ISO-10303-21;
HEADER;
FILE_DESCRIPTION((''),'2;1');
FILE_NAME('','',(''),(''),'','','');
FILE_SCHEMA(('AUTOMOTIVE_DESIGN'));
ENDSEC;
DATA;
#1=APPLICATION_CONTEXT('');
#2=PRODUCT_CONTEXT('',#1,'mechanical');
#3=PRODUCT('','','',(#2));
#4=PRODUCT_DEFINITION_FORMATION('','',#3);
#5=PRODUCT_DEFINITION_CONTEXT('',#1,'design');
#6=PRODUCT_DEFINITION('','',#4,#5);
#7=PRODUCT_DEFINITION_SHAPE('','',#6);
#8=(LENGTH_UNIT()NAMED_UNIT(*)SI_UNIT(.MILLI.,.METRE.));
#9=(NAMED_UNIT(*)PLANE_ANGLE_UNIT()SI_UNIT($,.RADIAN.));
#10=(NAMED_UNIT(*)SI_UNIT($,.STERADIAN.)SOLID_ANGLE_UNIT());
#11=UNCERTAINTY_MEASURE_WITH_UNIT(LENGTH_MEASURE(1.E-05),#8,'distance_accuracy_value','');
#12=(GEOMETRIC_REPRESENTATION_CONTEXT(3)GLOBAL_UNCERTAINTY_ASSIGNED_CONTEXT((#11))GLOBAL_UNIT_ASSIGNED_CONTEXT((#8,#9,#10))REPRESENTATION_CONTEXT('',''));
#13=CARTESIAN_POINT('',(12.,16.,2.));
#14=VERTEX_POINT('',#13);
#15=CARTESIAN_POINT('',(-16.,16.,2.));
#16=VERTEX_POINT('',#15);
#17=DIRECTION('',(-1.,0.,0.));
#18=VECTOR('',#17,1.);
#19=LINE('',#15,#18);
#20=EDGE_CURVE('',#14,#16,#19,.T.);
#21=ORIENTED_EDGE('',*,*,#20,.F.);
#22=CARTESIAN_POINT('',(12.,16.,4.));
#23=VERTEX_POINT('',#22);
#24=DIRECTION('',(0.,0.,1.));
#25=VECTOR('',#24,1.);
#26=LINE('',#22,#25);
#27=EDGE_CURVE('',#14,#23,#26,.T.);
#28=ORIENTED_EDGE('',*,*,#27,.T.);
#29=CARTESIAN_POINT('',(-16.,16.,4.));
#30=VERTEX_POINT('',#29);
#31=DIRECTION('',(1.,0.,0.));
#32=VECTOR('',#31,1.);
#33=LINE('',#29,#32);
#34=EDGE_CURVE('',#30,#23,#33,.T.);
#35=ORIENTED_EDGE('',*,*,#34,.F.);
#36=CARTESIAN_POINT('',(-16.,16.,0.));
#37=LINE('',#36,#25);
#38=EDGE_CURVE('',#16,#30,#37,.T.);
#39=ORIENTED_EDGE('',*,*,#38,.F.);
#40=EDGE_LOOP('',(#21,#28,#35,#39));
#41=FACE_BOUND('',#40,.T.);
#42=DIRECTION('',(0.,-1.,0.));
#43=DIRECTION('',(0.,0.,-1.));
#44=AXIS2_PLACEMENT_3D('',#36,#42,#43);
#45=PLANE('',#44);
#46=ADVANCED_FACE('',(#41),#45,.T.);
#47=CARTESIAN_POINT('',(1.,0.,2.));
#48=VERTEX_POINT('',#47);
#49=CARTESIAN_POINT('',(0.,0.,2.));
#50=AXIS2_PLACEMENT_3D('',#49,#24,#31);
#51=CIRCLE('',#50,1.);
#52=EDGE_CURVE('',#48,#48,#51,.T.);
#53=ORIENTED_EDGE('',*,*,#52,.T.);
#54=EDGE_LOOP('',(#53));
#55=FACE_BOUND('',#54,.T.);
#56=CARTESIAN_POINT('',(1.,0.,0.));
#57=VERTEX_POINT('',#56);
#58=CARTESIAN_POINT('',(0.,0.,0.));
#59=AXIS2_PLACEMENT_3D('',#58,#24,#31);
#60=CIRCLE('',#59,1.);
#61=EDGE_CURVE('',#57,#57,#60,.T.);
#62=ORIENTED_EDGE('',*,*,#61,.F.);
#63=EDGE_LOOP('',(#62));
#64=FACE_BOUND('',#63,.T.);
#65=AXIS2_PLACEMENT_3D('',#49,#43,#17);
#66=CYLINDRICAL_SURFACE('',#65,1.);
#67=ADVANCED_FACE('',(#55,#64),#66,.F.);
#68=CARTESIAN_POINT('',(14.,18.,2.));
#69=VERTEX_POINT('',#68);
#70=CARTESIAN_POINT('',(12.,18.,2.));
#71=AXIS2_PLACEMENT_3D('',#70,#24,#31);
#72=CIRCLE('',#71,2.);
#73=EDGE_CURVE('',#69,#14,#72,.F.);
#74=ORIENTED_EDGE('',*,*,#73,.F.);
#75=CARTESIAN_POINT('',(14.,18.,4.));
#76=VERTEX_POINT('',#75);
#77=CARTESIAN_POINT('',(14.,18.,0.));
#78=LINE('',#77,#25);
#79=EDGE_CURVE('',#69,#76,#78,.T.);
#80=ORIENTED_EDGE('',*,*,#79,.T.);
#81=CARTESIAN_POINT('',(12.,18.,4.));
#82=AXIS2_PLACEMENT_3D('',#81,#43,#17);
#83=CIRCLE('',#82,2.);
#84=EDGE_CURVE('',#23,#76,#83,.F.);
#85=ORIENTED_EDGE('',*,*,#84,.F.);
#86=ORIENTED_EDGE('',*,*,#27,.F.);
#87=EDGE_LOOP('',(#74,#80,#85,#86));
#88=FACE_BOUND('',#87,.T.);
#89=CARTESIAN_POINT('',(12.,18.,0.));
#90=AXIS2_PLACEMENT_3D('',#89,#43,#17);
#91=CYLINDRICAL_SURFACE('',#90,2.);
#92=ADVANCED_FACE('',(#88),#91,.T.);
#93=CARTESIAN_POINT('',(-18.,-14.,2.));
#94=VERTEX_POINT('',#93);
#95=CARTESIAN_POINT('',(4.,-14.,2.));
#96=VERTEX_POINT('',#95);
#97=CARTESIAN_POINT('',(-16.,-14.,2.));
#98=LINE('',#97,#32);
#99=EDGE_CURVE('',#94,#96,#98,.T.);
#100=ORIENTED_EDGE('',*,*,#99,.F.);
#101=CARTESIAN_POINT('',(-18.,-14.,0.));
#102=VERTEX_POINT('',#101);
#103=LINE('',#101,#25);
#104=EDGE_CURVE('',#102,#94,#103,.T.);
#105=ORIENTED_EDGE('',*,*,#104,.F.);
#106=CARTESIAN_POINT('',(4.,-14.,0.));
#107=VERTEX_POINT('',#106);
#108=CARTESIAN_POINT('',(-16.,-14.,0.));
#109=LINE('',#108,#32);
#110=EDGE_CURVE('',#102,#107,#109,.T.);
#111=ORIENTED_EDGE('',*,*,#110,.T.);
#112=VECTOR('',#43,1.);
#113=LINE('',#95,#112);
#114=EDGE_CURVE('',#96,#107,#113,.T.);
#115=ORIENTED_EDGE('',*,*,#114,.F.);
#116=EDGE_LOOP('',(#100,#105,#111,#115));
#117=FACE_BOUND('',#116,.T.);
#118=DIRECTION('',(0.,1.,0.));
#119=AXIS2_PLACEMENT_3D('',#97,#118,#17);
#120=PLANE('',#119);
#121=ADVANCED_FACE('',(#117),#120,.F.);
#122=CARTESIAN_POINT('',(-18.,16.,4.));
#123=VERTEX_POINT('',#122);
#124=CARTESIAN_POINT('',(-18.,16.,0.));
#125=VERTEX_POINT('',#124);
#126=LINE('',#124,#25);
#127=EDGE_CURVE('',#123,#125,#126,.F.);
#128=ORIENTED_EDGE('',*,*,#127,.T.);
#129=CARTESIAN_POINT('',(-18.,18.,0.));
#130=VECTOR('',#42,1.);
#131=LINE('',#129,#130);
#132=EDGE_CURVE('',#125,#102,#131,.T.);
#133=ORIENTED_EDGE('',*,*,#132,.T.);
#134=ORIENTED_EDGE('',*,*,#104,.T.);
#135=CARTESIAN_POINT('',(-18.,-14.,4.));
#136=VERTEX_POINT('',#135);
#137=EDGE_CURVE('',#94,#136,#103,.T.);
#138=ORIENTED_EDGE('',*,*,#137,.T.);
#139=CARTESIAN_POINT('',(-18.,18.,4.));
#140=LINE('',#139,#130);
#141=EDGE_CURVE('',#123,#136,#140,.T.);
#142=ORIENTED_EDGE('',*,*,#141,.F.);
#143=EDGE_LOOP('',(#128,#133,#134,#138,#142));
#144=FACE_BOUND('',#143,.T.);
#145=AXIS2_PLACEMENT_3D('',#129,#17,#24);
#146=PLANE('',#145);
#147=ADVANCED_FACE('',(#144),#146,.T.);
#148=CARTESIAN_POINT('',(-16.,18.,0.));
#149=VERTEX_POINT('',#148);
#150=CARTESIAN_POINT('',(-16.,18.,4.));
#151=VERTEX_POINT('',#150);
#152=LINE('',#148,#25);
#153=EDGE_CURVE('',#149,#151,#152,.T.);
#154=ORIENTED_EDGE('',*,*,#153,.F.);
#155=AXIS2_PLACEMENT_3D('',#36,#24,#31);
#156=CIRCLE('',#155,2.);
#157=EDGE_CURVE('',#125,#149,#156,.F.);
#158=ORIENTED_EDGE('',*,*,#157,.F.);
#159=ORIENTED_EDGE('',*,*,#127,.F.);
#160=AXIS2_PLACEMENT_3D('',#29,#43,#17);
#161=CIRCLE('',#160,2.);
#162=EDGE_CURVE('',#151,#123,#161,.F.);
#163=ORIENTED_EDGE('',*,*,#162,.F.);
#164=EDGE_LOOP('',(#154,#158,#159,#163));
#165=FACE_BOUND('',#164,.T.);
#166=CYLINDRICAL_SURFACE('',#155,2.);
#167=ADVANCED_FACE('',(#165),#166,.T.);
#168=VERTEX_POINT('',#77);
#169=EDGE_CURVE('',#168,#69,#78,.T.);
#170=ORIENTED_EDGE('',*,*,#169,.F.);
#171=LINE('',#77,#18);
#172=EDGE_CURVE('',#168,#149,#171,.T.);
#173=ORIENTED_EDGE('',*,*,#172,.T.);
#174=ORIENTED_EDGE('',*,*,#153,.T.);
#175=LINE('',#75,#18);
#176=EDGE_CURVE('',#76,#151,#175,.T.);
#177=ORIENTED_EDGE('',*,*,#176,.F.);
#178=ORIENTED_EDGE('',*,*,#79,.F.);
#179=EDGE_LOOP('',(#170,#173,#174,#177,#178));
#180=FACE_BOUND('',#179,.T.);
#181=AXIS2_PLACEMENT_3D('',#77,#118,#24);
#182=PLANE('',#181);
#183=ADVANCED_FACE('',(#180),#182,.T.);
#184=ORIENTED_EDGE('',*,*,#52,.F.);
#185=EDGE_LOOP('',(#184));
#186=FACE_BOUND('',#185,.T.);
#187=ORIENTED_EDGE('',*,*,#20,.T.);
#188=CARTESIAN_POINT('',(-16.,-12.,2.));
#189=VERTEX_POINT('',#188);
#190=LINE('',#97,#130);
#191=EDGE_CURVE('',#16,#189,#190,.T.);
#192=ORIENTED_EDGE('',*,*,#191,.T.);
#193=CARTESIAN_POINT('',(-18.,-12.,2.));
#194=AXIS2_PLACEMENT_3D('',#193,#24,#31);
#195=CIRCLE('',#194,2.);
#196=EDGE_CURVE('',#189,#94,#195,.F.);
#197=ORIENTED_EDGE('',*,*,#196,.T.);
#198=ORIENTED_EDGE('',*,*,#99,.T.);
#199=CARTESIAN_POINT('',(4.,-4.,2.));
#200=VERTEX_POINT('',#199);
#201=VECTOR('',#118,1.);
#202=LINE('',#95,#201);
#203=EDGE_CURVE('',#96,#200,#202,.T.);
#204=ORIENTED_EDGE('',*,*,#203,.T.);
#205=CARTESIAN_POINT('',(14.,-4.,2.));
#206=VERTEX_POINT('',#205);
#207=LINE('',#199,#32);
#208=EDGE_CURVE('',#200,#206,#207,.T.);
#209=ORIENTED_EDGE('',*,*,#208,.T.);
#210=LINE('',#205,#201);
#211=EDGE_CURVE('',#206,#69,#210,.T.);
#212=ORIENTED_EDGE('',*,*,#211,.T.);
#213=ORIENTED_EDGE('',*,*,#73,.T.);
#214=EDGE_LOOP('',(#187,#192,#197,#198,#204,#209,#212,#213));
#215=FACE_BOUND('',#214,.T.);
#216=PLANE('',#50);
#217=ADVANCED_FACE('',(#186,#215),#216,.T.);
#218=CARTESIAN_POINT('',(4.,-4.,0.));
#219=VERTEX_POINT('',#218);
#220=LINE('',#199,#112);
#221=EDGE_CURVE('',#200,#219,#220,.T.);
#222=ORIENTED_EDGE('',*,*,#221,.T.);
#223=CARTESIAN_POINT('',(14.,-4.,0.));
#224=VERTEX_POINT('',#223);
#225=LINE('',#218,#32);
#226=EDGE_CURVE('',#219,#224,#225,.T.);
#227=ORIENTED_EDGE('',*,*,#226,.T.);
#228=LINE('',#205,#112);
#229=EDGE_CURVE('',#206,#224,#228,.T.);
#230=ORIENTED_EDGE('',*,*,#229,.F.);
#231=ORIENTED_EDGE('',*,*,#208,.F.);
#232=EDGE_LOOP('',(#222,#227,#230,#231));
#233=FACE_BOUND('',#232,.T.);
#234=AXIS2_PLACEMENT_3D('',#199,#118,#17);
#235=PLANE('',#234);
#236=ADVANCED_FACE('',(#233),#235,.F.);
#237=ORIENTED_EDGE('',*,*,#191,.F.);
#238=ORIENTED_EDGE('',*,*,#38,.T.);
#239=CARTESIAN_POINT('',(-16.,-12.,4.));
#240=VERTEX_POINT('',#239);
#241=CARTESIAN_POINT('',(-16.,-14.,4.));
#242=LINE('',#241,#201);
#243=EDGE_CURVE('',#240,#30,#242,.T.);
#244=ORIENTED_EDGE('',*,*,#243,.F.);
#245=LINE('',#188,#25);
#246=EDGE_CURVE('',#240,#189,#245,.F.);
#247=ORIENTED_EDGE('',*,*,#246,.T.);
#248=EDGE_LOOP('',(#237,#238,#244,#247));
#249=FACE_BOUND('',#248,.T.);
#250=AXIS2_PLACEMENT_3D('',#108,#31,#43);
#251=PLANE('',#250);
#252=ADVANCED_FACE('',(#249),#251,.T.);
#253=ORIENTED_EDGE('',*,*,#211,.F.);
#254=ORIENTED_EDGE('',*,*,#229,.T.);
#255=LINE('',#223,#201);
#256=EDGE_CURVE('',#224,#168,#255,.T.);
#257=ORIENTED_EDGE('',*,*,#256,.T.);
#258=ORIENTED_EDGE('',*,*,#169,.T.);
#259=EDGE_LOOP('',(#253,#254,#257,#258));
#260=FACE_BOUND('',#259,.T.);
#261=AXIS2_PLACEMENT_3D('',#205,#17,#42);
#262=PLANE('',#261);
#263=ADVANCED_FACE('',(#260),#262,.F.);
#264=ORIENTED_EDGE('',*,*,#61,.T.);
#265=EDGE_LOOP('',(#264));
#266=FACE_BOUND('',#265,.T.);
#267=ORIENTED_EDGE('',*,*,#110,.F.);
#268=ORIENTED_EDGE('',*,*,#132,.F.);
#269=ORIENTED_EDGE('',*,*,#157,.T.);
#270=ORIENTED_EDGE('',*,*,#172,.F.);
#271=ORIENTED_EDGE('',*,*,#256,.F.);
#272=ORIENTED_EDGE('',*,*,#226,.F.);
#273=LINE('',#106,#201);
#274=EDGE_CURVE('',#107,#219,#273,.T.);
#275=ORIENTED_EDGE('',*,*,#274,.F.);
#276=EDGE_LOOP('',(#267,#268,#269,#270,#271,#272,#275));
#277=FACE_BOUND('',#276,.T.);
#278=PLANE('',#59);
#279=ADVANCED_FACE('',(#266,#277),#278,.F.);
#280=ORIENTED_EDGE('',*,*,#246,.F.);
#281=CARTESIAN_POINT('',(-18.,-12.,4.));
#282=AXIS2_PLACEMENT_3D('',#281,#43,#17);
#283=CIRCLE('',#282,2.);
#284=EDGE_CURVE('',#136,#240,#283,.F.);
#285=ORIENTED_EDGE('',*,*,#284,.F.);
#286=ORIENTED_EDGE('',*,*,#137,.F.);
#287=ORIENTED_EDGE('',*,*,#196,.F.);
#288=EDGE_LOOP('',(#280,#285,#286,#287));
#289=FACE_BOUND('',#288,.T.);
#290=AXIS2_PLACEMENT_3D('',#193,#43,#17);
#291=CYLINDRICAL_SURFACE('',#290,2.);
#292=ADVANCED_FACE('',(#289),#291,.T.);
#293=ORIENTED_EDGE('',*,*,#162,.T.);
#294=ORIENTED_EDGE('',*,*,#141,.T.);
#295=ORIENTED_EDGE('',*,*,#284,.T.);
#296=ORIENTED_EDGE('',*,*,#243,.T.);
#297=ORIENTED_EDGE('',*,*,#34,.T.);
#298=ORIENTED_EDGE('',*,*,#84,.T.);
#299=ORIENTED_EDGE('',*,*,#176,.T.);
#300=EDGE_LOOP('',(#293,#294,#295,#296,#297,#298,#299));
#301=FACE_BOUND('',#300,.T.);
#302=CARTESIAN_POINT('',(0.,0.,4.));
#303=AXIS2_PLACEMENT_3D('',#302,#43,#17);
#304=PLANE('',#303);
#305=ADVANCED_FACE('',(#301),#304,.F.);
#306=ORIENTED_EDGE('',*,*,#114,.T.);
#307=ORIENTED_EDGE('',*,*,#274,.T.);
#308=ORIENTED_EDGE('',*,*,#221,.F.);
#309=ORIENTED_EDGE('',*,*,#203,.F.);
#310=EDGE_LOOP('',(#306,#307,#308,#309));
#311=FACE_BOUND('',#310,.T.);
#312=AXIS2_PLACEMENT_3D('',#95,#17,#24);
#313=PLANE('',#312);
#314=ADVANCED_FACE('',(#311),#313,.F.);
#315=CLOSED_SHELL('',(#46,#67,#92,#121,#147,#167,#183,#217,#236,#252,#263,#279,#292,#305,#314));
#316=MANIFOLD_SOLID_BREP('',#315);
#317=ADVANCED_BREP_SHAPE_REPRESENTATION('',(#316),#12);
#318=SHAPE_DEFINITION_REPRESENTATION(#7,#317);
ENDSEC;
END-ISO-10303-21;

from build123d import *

# Parameters (mm, degrees)
SKETCH1_R                = 1
BOSS_EXTRUDE1_DEPTH      = 2
BOSS_EXTRUDE2_DEPTH      = 2
BOSS_EXTRUDE2_DEPTH_BACK = 2
FILLET1_R                = 2


with BuildPart() as part:
    # Sketch1 → Boss-Extrude1 (new body)
    with BuildSketch(Plane.XY):
        Polygon((-16, -14), (-16, 16), (14, 16), (14, -4), (4, -4), (4, -14), align=None)
        Circle(SKETCH1_R, mode=Mode.SUBTRACT)
    extrude(amount=BOSS_EXTRUDE1_DEPTH)

    # Sketch3 → Boss-Extrude2 (add, two sides: drawn at the far end of the back side and taken through both)
    with BuildSketch(Plane.XY.offset(2).offset(-BOSS_EXTRUDE2_DEPTH_BACK)):
        Polygon((-18, -14), (-16, -14), (-16, 16), (14, 16), (14, 18), (-18, 18), align=None)
    extrude(amount=BOSS_EXTRUDE2_DEPTH + BOSS_EXTRUDE2_DEPTH_BACK)

    # Fillet1
    fillet1_edges = [part.edges().sort_by_distance(p)[0] for p in [
        (14, 16, 3),
        (-16, -14, 3),
        (-18, 18, 2),
    ]]
    fillet(fillet1_edges, radius=FILLET1_R - 0.0001)  # a hair under: the kernel refuses the full size


solid = part.part
